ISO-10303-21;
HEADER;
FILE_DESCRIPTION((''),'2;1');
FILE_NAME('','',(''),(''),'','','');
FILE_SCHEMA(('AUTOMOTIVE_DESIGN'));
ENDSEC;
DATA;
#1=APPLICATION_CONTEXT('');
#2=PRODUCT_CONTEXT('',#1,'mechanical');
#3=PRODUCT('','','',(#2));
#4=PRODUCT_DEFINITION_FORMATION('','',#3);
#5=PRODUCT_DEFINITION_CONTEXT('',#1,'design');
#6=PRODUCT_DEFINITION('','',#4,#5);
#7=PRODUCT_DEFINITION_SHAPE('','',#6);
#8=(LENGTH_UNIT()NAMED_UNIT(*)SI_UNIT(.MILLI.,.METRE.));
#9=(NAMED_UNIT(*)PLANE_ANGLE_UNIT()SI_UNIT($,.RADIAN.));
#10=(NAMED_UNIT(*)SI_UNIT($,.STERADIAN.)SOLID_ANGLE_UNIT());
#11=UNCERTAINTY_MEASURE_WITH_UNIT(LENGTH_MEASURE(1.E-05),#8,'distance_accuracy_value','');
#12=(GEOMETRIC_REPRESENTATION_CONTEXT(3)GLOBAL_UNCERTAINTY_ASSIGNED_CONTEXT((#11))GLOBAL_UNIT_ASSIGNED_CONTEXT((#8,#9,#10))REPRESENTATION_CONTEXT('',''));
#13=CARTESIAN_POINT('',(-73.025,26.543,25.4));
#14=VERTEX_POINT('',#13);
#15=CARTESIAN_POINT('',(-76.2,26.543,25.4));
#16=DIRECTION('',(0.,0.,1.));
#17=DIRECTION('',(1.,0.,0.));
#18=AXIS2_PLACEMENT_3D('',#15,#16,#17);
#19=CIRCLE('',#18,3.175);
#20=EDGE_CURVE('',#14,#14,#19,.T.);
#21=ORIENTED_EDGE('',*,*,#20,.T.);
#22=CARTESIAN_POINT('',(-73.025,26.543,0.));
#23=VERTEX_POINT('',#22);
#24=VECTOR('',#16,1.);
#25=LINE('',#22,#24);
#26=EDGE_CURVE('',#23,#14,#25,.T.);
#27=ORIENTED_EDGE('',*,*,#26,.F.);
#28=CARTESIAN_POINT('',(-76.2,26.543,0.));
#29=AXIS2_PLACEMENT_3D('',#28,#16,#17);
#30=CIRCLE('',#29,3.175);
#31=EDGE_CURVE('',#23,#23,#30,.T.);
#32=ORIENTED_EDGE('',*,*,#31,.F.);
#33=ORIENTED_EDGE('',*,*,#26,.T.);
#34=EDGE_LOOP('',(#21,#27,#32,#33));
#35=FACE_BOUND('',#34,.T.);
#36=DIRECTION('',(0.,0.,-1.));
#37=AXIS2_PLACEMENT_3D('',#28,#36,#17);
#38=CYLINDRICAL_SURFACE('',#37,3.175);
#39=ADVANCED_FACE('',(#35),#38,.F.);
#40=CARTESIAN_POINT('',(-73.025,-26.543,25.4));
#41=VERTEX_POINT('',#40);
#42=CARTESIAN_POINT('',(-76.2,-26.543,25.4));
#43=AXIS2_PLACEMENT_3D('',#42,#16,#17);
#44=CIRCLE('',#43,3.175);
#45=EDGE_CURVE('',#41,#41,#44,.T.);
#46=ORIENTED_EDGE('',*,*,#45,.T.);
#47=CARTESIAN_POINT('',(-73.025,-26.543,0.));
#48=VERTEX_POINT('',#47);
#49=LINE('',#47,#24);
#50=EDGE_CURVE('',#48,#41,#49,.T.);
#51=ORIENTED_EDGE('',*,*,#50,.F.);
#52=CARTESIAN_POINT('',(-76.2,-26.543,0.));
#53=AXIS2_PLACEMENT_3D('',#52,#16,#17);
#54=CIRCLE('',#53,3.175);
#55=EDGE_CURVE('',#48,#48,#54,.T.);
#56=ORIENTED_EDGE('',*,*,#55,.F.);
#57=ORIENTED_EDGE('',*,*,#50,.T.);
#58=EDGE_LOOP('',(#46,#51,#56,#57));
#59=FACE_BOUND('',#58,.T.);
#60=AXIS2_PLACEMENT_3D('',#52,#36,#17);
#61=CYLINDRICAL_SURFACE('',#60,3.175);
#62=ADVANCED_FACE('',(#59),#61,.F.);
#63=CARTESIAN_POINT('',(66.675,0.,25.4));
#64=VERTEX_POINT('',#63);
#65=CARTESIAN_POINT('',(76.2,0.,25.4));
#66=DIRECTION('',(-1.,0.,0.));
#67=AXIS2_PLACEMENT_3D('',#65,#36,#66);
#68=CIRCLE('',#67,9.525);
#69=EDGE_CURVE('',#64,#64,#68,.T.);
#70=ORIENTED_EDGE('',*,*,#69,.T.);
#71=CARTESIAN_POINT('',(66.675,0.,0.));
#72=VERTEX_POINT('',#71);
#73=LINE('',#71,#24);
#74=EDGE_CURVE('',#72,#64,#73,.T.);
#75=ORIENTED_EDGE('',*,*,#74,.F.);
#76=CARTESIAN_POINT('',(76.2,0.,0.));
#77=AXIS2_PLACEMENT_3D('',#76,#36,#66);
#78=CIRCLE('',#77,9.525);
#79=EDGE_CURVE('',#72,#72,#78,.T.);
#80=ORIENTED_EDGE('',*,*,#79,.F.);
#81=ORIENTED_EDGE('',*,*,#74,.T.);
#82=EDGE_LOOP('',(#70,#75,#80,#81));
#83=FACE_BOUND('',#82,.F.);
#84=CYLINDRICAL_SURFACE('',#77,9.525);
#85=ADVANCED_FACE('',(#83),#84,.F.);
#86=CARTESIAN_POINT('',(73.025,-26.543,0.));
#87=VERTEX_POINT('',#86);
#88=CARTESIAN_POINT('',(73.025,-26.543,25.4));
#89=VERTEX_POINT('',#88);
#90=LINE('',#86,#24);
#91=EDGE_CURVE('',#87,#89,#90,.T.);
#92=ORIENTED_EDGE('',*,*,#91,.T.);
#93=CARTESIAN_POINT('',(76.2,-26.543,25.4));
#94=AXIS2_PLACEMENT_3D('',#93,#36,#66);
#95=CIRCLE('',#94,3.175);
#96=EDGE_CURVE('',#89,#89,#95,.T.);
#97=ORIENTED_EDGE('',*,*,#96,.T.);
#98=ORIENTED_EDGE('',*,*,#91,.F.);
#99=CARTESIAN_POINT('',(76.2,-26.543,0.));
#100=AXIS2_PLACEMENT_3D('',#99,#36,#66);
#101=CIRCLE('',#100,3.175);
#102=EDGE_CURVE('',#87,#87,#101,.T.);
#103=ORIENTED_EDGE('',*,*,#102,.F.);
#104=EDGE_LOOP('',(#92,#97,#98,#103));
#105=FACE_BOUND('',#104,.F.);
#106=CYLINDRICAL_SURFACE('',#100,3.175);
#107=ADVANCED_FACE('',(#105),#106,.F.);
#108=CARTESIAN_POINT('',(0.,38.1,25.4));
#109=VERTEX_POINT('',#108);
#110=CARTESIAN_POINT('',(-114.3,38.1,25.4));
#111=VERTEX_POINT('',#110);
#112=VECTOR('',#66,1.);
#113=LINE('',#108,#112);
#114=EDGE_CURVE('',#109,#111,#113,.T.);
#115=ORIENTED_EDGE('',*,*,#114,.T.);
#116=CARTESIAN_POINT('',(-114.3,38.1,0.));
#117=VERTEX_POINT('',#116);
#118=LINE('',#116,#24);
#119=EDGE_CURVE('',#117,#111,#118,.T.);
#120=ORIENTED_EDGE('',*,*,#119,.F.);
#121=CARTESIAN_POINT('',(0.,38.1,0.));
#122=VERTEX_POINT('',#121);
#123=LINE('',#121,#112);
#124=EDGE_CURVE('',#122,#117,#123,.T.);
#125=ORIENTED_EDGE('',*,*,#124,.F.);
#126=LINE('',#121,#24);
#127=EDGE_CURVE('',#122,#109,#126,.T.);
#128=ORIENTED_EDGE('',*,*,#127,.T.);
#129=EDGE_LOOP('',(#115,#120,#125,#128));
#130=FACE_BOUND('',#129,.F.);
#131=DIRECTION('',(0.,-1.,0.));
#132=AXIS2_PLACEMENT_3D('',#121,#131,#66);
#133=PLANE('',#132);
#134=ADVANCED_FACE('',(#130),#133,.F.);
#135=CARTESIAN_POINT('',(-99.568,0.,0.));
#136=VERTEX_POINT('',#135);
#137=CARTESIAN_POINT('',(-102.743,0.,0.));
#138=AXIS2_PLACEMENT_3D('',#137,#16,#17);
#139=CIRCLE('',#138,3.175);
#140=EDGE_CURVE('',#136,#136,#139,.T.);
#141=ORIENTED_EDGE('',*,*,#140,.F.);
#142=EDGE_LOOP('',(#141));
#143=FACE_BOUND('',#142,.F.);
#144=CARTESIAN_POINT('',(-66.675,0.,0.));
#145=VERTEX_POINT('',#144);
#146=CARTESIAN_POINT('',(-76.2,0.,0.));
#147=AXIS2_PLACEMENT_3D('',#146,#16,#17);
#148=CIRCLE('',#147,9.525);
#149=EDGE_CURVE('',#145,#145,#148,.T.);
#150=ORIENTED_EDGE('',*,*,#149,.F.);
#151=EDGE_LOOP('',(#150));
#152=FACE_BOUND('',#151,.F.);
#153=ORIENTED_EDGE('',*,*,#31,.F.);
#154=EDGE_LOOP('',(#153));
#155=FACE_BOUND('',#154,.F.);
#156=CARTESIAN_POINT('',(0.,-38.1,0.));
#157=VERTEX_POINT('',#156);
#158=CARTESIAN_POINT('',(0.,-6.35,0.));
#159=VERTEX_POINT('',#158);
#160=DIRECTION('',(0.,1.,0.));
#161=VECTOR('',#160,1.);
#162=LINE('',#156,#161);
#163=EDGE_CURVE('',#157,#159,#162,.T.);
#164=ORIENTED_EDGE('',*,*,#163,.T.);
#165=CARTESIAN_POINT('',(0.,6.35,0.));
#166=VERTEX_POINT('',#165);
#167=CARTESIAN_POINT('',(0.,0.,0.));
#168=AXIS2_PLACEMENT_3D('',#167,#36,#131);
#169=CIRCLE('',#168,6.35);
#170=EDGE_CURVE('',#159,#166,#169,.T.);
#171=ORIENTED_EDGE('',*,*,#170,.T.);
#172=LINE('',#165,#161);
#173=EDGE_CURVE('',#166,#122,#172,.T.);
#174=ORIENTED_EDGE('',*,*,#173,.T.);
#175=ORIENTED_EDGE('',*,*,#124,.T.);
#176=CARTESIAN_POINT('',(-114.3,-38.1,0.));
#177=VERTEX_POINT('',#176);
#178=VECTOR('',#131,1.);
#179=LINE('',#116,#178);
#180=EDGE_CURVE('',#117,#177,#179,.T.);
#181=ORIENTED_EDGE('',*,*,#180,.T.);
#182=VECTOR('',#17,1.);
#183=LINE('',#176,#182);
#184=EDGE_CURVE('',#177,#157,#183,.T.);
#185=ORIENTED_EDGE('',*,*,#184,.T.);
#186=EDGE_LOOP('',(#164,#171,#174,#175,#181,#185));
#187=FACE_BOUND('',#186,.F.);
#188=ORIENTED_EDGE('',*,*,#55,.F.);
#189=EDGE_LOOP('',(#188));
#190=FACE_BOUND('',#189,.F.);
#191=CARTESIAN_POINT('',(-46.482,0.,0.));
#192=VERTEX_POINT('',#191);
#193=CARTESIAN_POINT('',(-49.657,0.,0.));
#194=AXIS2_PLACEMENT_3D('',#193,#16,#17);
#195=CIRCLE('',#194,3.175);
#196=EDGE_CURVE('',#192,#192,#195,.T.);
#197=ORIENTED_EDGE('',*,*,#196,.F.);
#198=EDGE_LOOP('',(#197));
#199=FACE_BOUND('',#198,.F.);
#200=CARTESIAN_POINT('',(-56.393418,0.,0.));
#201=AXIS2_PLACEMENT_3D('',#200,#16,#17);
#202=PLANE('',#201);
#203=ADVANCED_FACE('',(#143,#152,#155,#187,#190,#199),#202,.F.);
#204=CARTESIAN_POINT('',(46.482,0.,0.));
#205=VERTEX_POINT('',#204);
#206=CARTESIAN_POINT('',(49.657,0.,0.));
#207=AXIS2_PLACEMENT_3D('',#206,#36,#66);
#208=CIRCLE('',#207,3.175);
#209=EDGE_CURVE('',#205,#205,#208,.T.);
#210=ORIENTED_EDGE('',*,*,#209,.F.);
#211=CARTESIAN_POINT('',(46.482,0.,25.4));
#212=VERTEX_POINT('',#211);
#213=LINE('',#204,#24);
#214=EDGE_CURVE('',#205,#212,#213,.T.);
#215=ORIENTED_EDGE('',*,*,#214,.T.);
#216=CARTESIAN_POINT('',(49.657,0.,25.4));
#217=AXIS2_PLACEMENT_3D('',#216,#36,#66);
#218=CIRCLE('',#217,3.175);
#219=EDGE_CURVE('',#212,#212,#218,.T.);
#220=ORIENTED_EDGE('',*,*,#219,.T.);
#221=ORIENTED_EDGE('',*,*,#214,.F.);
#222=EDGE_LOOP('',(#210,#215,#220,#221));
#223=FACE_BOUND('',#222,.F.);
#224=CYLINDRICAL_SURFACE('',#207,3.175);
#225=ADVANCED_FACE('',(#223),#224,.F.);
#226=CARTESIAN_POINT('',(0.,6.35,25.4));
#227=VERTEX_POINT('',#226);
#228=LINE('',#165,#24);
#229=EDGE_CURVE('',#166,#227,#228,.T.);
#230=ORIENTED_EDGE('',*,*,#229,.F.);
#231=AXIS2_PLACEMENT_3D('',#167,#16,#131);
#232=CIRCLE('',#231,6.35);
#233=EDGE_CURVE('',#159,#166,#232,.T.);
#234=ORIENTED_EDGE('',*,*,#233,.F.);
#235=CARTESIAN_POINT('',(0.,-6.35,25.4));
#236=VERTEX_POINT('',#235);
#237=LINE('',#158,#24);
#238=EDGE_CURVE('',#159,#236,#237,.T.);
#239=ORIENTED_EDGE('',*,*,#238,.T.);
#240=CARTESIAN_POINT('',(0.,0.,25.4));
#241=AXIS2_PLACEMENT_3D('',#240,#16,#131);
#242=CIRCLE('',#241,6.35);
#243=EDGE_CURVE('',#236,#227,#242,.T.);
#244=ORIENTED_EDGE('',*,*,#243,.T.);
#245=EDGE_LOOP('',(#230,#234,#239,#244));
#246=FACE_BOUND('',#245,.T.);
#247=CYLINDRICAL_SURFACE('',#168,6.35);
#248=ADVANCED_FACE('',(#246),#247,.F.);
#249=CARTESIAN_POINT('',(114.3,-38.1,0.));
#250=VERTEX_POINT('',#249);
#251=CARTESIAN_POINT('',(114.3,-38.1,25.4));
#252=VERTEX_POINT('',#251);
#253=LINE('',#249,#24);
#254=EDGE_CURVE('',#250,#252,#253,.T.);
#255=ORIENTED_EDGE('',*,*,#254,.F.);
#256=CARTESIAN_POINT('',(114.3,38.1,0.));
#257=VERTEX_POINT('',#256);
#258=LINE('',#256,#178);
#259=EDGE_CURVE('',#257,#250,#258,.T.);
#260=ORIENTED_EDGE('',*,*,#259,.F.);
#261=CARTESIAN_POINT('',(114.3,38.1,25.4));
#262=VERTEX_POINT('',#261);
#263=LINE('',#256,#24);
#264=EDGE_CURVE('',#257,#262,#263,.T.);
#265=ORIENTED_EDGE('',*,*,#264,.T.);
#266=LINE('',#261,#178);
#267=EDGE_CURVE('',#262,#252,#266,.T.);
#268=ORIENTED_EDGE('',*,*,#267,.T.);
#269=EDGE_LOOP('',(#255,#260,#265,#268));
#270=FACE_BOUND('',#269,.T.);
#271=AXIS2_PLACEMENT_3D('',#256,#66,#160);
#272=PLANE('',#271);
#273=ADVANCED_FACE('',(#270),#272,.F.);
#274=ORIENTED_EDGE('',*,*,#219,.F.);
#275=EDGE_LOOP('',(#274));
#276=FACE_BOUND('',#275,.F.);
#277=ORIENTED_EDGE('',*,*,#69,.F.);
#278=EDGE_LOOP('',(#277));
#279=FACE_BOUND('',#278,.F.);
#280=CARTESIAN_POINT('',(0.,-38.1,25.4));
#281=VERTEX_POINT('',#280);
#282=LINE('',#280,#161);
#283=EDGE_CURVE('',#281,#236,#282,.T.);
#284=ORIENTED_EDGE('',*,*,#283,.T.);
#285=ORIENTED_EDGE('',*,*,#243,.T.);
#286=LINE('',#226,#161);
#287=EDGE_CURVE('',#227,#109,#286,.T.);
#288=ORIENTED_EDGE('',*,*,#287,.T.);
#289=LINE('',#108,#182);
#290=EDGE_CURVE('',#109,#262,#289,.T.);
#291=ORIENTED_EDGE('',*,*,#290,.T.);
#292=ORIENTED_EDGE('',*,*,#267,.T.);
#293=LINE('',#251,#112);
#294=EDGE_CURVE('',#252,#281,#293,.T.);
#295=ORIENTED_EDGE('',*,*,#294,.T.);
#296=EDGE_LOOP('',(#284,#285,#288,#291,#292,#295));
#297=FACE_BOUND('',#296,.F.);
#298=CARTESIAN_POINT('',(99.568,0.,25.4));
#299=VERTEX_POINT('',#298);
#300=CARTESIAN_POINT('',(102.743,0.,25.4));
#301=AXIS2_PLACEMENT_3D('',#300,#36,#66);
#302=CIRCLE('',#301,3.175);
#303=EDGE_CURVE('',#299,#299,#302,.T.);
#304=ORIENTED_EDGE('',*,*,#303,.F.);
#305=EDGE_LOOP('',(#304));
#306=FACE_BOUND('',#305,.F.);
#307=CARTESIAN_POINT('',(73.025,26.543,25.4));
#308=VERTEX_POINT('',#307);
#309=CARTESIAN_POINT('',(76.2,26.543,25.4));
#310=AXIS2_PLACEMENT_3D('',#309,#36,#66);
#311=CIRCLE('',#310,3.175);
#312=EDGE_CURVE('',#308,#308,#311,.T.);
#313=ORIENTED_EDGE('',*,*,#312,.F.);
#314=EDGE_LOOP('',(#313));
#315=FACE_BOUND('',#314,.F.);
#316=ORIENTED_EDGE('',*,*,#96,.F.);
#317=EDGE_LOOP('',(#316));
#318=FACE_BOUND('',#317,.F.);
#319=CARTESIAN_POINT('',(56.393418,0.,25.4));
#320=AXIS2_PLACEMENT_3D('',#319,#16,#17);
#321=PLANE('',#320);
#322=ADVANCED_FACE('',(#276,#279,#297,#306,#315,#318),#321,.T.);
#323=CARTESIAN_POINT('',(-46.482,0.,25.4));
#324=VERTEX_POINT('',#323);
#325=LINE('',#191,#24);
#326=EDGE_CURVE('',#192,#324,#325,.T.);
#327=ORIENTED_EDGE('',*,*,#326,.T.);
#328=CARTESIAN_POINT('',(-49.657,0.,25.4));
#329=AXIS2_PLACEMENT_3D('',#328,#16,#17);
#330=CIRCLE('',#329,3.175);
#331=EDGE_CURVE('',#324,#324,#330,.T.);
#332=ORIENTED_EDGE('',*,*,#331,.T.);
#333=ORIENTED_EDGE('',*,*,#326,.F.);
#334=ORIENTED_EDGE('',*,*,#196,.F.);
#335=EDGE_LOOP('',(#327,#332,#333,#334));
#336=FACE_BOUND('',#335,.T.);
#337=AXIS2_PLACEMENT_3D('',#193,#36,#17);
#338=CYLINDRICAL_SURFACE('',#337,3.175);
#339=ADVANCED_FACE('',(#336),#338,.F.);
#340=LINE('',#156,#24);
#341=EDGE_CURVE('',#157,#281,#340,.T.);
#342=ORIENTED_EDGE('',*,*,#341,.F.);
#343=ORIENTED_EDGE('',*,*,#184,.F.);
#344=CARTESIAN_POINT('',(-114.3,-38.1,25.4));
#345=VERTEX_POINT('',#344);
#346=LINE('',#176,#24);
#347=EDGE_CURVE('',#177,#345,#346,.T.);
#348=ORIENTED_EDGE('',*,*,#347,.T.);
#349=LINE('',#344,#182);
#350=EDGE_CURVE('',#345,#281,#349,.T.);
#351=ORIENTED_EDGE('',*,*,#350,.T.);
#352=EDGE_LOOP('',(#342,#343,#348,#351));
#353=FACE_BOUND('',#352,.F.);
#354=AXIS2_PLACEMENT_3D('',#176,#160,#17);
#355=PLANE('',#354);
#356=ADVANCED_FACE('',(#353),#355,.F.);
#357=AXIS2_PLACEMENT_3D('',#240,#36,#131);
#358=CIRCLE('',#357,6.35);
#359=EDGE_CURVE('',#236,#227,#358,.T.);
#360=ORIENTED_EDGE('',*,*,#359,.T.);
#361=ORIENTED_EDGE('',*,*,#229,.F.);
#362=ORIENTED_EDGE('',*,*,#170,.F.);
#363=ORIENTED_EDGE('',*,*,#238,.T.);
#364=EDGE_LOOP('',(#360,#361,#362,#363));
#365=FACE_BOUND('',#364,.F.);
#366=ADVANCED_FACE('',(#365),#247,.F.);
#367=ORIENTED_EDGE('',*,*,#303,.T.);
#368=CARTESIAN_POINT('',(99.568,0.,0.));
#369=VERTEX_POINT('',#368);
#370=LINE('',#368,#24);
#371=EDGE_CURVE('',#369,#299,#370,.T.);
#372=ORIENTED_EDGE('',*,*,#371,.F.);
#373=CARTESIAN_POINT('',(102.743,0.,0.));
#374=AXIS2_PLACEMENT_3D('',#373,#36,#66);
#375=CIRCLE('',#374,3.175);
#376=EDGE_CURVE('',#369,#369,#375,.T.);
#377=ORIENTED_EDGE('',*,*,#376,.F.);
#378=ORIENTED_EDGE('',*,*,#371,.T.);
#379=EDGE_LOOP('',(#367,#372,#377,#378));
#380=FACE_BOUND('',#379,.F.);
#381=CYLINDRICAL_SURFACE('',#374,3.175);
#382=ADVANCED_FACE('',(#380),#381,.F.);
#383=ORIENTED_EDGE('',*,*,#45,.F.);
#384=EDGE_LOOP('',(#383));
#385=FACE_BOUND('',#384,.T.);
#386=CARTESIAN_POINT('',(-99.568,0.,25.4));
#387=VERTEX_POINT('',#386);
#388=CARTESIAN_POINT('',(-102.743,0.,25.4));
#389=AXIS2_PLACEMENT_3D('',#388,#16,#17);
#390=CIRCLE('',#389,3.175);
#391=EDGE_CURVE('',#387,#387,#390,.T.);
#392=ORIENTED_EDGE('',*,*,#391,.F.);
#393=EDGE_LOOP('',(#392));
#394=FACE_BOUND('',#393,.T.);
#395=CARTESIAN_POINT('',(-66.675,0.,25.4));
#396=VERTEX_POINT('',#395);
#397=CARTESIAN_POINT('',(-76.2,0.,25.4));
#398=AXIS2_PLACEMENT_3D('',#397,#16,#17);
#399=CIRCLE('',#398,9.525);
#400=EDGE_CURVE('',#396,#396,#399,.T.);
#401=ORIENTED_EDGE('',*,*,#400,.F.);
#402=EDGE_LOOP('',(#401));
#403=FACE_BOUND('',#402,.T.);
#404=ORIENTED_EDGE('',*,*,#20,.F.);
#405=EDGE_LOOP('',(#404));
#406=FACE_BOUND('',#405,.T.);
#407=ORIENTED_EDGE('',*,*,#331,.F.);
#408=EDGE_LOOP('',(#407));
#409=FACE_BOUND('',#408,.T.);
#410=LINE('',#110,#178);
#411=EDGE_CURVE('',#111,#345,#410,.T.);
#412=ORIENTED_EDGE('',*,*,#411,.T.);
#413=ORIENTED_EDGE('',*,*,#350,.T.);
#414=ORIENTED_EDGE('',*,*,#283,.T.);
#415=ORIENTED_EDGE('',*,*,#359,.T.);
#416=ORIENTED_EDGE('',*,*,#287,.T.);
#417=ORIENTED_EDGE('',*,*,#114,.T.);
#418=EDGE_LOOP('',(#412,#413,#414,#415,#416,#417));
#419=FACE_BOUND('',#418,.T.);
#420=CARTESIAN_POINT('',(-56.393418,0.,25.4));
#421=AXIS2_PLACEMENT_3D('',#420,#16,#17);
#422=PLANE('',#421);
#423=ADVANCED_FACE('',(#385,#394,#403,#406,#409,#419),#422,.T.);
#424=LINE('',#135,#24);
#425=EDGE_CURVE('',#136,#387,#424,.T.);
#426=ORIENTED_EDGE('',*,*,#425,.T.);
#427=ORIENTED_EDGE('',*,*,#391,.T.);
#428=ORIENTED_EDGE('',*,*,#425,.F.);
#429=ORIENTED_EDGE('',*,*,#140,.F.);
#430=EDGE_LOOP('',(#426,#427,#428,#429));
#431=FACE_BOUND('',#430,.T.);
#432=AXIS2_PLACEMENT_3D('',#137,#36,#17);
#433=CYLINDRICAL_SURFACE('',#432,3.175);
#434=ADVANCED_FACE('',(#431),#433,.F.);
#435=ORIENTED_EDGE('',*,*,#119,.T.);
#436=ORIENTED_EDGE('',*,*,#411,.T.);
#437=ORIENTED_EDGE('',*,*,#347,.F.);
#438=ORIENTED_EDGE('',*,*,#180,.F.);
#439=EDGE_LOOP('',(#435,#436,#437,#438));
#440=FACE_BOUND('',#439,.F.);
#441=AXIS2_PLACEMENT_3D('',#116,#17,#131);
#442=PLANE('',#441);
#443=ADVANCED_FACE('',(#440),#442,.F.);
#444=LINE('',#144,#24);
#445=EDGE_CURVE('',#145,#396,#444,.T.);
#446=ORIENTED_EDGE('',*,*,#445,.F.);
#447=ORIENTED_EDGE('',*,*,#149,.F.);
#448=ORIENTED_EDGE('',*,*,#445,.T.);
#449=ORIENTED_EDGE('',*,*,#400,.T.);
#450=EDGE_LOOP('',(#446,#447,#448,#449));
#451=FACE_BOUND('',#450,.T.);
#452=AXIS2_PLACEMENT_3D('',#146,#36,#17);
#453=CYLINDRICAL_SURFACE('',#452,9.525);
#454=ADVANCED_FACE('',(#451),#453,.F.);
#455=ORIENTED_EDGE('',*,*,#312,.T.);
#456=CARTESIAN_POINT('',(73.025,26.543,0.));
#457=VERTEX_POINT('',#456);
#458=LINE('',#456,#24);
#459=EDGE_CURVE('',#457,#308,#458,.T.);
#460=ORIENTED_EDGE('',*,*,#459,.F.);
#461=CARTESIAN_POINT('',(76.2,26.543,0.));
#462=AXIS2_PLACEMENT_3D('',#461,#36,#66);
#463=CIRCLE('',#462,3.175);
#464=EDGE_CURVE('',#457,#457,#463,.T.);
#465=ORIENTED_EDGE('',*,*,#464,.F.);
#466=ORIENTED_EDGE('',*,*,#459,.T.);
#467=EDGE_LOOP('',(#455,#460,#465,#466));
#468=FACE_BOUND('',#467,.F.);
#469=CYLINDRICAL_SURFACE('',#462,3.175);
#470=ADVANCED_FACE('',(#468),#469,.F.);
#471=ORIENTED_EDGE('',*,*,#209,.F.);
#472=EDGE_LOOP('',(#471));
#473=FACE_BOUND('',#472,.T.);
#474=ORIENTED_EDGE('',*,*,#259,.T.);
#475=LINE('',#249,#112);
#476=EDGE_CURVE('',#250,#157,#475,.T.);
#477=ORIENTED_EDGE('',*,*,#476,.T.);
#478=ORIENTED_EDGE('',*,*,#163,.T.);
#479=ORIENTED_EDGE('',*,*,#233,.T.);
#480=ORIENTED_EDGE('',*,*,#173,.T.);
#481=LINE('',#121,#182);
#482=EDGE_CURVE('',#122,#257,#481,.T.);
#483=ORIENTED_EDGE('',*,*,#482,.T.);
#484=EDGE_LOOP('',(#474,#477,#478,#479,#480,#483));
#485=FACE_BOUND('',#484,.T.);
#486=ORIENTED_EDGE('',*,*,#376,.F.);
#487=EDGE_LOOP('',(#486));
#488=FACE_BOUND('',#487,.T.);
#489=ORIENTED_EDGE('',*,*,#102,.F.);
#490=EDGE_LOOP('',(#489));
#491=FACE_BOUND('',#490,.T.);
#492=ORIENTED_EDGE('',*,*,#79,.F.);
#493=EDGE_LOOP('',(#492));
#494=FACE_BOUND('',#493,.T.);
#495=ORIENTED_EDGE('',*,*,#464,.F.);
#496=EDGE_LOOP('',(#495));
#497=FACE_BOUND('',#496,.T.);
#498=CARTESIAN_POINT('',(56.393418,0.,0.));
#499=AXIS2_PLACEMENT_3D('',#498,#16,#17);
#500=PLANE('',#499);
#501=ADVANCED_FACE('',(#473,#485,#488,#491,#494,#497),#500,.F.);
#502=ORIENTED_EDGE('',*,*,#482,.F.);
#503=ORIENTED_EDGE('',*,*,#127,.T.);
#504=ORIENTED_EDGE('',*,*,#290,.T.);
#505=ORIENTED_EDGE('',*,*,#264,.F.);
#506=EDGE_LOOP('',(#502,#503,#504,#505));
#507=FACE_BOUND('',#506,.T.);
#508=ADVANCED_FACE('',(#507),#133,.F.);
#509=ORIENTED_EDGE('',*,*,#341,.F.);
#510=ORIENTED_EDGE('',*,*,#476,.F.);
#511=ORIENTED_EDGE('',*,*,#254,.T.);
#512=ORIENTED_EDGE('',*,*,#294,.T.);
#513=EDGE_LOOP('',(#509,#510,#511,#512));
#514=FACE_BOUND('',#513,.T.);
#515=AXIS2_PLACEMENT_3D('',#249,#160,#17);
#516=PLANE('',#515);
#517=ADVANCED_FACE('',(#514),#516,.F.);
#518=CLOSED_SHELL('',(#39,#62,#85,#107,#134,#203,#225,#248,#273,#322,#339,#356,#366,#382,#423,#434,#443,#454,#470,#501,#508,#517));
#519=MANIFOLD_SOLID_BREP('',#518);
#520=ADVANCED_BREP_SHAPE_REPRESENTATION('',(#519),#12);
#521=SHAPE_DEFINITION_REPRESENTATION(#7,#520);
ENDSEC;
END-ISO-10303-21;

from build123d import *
from build123d import SkipClean  # not in build123d's __all__

# Parameters (mm, degrees)
F0_R     = 3.175
F0_R_2   = 9.525
F1_DEPTH = 25.4


# Not quite as in the source:
# - a pattern or mirror of a feature is missing from the dataset's text; its kind, count and spacing are read off the source's solid


with BuildPart() as f1:
    # F0 (on Top) → F1 (new body)
    with BuildSketch(Plane.XY):
        with BuildLine():
            Line((0, 38.1), (-114.3, 38.1))
            Line((-114.3, 38.1), (-114.3, -38.1))
            Line((-114.3, -38.1), (0, -38.1))
            Line((0, -38.1), (0, -6.35))
            ThreePointArc((0, -6.35), (-6.35, 0), (0, 6.35))
            Line((0, 6.35), (0, 38.1))
        make_face()
        with Locations((-76.2, -26.543)):
            Circle(F0_R, mode=Mode.SUBTRACT)
        with Locations((-102.743, 0)):
            Circle(F0_R, mode=Mode.SUBTRACT)
        with Locations((-76.2, 0)):
            Circle(F0_R_2, mode=Mode.SUBTRACT)
        with Locations((-76.2, 26.543)):
            Circle(F0_R, mode=Mode.SUBTRACT)
        with Locations((-49.657, 0)):
            Circle(F0_R, mode=Mode.SUBTRACT)
    extrude(amount=F1_DEPTH)

    # F1_copies: F1 across plane


with BuildPart() as f1_1:
    add(f1.part, clean=False)
    with SkipClean():  # cleaning this boolean's faces spoils the solid; the shape is the same uncleaned
        add(f1.part.mirror(Plane(origin=(0, 0, 0), x_dir=(0, 0, 1), z_dir=(1, 0, 0))), clean=False)


solid = f1_1.part
